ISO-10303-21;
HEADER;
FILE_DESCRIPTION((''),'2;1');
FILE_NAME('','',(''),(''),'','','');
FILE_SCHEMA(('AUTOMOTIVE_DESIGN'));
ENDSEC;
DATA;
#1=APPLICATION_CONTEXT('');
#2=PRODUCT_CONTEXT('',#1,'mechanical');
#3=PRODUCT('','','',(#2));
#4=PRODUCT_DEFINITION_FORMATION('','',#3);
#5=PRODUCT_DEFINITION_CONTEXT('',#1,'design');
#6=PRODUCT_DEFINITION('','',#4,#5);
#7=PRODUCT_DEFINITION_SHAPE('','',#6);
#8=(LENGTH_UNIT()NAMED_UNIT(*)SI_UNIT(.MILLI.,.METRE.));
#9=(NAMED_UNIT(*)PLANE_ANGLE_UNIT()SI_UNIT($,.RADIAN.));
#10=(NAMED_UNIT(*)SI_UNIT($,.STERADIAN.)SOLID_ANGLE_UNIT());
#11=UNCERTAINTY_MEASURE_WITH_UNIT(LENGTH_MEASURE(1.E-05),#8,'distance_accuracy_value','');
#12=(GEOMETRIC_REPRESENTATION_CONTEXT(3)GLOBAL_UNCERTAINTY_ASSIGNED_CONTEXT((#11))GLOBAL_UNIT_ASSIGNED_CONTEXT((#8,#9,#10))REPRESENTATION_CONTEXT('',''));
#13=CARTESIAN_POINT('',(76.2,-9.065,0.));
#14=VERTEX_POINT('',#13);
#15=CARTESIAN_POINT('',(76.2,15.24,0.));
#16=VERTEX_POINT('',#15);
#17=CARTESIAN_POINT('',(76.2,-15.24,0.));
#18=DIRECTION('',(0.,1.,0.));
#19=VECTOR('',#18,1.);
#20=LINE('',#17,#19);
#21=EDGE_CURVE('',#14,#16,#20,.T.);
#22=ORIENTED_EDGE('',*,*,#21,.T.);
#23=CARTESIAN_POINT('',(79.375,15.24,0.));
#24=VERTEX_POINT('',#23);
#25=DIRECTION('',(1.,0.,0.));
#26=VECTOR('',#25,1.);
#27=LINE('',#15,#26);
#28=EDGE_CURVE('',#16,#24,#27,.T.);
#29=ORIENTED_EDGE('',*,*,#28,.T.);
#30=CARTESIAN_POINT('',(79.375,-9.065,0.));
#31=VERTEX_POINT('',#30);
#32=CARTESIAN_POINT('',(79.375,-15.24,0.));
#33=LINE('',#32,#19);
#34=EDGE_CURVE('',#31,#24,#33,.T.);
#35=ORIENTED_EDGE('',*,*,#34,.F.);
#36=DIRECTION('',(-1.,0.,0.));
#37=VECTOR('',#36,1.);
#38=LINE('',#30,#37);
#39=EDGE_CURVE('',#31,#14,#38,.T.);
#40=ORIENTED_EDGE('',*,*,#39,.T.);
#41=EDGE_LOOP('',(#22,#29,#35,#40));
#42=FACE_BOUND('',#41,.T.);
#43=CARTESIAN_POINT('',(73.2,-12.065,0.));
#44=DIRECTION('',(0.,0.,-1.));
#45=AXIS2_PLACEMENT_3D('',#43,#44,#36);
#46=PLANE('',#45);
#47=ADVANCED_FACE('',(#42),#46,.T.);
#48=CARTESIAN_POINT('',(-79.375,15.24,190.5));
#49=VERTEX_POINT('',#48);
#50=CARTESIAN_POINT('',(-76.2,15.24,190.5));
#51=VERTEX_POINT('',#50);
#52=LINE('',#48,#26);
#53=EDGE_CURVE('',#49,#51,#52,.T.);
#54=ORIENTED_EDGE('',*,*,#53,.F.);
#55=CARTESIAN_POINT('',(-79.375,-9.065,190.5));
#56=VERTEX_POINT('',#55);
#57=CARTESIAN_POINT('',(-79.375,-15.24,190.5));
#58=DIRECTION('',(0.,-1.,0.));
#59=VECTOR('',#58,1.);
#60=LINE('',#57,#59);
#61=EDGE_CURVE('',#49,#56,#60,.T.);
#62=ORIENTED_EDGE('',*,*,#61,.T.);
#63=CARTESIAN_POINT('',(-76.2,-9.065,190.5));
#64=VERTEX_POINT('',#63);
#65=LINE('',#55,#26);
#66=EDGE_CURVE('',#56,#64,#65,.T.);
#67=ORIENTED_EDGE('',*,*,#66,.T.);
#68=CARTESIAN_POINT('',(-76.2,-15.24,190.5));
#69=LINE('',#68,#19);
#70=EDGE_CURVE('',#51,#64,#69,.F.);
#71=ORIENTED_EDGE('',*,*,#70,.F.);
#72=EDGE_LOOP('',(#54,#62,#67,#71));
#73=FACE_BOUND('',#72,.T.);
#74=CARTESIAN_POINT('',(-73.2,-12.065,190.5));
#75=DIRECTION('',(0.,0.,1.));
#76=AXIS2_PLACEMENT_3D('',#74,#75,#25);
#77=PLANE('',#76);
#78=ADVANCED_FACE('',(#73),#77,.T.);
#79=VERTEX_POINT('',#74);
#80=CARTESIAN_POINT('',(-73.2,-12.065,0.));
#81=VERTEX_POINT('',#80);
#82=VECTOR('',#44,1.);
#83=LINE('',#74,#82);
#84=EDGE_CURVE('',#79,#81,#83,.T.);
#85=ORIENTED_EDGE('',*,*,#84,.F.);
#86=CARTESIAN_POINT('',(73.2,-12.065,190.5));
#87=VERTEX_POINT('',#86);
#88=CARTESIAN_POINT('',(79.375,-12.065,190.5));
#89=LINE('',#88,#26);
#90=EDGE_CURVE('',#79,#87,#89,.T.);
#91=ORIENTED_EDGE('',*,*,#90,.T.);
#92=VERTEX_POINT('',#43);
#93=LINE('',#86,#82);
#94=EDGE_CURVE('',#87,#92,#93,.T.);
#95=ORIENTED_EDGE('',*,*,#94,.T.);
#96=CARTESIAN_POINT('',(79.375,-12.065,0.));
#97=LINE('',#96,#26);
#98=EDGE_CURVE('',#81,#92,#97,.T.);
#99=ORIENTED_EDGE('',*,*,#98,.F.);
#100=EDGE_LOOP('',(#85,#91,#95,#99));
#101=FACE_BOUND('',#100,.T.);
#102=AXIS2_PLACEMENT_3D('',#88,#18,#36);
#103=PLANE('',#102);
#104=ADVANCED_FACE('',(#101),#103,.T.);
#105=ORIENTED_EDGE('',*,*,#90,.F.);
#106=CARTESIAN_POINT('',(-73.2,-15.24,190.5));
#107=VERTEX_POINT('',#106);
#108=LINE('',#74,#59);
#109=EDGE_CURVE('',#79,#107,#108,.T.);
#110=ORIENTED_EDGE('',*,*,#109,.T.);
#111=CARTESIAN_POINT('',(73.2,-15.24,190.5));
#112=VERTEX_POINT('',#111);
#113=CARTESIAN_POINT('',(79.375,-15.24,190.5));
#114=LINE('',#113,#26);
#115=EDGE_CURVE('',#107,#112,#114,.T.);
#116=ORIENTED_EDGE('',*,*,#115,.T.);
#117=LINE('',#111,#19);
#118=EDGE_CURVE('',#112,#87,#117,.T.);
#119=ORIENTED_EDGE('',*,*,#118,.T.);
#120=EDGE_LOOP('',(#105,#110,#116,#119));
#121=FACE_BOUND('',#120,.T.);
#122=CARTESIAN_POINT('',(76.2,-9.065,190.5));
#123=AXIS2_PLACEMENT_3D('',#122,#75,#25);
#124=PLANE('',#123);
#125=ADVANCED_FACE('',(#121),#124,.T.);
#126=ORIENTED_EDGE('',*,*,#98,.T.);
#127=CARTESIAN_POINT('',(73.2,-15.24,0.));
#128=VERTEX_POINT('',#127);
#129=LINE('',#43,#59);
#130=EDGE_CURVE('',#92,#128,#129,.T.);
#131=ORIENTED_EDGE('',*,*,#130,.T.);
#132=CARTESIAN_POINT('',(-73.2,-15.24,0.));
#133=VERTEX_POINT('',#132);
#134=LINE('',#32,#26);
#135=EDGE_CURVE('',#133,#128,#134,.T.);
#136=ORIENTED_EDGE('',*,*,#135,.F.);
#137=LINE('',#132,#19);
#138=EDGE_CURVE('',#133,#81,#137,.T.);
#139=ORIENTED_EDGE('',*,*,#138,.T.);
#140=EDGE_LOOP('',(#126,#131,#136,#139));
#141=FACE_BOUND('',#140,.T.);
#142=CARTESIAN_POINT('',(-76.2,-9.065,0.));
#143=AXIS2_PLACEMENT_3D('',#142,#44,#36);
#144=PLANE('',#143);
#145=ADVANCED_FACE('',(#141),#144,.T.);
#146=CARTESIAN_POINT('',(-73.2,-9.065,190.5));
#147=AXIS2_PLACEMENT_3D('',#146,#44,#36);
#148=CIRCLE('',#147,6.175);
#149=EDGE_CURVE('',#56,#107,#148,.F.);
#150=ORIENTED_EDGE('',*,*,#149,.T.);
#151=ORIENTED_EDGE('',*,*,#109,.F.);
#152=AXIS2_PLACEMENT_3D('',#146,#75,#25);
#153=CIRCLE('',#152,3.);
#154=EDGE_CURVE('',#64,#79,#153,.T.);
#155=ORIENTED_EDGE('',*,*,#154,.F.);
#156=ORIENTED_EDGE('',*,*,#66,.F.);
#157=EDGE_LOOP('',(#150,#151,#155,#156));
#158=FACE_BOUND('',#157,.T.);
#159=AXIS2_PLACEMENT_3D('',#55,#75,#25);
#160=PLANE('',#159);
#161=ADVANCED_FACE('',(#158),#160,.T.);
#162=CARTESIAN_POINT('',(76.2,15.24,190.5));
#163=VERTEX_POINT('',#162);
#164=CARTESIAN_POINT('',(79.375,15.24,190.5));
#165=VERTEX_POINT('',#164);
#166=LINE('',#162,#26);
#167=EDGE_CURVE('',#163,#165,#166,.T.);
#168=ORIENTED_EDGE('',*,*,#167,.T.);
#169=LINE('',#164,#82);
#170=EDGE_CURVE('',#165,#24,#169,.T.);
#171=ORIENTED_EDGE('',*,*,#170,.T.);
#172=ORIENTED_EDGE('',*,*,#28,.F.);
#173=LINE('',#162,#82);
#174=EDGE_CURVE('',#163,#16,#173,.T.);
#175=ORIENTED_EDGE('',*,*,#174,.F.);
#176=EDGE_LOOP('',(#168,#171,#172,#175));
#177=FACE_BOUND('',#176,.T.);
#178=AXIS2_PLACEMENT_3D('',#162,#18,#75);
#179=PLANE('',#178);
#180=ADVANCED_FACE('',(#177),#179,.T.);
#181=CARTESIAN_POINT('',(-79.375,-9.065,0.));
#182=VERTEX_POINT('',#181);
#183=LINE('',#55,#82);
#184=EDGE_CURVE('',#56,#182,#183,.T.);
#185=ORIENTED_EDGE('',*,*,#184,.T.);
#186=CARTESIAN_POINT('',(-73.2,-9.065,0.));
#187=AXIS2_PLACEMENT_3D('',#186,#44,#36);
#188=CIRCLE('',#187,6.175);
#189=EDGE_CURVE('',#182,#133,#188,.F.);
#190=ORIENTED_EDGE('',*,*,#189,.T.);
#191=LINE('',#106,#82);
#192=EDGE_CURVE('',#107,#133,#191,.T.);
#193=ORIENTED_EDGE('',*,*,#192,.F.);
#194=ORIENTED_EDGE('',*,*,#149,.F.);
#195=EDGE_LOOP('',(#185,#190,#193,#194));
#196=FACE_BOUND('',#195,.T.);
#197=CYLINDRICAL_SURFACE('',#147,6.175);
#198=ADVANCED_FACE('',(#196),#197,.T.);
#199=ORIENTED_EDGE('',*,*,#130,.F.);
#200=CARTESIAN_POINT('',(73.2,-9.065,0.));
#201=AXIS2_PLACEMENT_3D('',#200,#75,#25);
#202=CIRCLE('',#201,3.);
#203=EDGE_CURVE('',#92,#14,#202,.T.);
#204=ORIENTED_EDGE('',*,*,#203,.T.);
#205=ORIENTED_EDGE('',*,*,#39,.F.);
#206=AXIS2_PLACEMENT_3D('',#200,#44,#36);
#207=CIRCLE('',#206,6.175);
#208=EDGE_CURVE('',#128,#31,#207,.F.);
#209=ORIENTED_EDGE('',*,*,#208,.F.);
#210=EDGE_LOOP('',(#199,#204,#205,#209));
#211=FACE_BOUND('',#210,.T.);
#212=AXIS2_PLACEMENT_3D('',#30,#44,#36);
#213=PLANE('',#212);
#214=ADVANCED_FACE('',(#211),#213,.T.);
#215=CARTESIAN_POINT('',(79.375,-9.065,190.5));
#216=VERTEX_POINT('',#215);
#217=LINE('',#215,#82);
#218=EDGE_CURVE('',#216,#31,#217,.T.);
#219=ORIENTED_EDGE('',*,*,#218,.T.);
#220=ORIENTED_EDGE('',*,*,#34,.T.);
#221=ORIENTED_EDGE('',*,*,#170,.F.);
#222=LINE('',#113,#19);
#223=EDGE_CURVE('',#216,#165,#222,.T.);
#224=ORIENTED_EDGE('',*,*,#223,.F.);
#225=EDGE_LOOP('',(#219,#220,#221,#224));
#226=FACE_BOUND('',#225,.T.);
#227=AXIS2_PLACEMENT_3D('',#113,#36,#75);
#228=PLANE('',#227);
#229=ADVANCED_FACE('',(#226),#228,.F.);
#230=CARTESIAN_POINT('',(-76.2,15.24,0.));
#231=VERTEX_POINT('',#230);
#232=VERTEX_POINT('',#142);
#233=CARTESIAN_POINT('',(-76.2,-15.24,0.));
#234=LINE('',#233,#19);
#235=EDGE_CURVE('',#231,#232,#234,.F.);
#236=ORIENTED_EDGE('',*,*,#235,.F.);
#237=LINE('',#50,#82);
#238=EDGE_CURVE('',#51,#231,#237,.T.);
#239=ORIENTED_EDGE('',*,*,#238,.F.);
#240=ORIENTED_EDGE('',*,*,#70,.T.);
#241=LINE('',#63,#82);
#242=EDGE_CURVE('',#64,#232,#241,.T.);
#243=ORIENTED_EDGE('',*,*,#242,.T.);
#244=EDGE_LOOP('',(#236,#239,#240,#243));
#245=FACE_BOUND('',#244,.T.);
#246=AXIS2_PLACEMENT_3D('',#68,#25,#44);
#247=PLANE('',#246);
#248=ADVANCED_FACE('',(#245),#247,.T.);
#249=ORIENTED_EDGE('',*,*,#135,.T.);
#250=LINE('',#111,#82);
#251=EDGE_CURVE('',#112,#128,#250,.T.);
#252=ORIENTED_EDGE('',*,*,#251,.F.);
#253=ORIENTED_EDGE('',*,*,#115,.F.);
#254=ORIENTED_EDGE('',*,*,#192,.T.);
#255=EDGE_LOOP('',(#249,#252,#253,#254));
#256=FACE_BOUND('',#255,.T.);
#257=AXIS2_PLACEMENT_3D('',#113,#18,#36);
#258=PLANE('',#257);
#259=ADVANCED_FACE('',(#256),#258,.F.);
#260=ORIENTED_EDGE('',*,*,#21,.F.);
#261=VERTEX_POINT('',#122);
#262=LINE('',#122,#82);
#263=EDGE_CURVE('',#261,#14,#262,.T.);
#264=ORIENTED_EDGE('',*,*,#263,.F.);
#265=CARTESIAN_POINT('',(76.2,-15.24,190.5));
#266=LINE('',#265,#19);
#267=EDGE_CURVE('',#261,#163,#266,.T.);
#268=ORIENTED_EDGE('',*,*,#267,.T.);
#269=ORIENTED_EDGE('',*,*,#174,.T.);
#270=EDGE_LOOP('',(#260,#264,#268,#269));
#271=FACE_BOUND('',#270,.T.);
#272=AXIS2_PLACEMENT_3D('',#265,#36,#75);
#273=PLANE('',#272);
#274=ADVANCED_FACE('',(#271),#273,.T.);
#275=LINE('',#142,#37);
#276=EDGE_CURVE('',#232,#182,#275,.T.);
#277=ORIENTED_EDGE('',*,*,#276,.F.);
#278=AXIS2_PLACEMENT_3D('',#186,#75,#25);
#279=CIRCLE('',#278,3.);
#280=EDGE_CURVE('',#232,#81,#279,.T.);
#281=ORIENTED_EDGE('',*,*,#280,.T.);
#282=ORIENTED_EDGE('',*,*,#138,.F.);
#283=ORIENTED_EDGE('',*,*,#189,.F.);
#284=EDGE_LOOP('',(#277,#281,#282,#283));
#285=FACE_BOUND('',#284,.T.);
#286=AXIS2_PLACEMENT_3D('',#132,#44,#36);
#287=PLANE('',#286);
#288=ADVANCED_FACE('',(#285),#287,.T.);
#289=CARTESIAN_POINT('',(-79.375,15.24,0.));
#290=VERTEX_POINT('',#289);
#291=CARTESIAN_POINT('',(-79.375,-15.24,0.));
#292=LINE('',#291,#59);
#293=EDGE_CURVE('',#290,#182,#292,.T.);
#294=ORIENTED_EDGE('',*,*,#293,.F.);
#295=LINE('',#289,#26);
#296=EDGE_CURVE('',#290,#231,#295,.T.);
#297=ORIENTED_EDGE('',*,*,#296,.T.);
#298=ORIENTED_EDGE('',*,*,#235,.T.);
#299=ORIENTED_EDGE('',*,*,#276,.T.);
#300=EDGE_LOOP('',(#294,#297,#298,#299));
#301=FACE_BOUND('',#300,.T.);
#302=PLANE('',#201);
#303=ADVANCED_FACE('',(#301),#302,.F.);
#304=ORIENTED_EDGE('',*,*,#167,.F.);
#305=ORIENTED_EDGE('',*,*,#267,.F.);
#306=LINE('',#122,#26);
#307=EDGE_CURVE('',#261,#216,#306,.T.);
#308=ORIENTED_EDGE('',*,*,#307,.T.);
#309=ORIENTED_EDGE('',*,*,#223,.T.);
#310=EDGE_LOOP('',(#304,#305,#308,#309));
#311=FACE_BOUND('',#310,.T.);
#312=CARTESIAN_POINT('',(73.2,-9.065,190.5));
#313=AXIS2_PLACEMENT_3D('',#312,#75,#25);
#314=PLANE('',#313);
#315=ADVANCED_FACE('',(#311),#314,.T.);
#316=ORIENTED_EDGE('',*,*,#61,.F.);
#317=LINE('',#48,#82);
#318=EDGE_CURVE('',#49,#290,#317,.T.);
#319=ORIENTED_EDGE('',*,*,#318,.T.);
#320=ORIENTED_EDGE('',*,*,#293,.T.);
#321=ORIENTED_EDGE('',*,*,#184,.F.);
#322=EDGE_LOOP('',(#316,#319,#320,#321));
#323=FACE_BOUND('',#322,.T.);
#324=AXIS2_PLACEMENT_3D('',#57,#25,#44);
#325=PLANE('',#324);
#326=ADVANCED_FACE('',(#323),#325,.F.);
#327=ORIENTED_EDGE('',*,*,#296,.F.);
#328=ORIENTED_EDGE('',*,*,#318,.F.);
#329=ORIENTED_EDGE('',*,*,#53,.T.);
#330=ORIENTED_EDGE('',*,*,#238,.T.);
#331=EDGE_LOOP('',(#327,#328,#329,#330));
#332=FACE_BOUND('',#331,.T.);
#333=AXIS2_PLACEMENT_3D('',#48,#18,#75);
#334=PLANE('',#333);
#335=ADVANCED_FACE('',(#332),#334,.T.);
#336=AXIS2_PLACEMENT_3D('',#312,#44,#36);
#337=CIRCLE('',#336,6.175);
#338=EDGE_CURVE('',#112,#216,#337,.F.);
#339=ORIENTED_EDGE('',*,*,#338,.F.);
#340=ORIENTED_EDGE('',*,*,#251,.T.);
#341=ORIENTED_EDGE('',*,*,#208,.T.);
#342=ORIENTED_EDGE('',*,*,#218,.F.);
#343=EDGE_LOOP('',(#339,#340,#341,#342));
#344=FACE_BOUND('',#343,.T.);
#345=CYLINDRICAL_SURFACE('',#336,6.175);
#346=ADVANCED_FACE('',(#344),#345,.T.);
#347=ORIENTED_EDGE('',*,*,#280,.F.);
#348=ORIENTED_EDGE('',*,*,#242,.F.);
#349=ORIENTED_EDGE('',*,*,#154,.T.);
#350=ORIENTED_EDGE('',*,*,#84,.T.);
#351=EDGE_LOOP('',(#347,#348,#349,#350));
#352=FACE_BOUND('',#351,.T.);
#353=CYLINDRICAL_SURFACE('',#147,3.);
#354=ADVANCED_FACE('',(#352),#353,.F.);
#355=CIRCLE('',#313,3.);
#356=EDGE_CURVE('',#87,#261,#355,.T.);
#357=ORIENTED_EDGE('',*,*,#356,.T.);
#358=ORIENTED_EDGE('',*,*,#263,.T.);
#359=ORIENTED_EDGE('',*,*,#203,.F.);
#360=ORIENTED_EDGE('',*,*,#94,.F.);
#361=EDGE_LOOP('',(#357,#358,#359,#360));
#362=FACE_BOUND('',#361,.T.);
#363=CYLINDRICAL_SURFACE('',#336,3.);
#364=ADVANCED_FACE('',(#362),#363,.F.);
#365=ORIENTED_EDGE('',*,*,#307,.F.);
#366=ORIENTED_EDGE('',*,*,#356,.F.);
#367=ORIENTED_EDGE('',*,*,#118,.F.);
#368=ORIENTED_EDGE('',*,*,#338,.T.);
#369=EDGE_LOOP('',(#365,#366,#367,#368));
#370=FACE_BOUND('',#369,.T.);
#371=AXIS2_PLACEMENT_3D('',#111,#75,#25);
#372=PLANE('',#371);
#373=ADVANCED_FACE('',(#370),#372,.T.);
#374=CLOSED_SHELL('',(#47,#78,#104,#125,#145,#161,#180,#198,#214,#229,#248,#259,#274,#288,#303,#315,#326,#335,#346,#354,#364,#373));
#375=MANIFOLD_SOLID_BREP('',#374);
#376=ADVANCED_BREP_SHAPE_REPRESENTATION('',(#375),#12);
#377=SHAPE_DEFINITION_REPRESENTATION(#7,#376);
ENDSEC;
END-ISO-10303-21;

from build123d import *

# Parameters (mm, degrees)
BASE_FLANGE1_DEPTH = 190.5


# Sheet-metal steps are written as plain solids
with BuildPart() as part:
    # Sketch1 → Base-Flange1 (new body)
    with BuildSketch(Plane.XY):
        with BuildLine():
            Line((79.375, 15.24), (79.375, -9.065))
            ThreePointArc((79.375, -9.065), (77.566384374, -13.431384374), (73.2, -15.24))
            Line((73.2, -15.24), (-73.2, -15.24))
            ThreePointArc((-73.2, -15.24), (-77.566384374, -13.431384374), (-79.375, -9.065))
            Line((-79.375, -9.065), (-79.375, 15.24))
            Line((-79.375, 15.24), (-76.2, 15.24))
            Line((-76.2, 15.24), (-76.2, -9.065))
            ThreePointArc((-76.2, -9.065), (-75.321320344, -11.186320344), (-73.2, -12.065))
            Line((-73.2, -12.065), (73.2, -12.065))
            ThreePointArc((73.2, -12.065), (75.321320344, -11.186320344), (76.2, -9.065))
            Line((76.2, -9.065), (76.2, 15.24))
            Line((76.2, 15.24), (79.375, 15.24))
        make_face()
    extrude(amount=BASE_FLANGE1_DEPTH)


solid = part.part
